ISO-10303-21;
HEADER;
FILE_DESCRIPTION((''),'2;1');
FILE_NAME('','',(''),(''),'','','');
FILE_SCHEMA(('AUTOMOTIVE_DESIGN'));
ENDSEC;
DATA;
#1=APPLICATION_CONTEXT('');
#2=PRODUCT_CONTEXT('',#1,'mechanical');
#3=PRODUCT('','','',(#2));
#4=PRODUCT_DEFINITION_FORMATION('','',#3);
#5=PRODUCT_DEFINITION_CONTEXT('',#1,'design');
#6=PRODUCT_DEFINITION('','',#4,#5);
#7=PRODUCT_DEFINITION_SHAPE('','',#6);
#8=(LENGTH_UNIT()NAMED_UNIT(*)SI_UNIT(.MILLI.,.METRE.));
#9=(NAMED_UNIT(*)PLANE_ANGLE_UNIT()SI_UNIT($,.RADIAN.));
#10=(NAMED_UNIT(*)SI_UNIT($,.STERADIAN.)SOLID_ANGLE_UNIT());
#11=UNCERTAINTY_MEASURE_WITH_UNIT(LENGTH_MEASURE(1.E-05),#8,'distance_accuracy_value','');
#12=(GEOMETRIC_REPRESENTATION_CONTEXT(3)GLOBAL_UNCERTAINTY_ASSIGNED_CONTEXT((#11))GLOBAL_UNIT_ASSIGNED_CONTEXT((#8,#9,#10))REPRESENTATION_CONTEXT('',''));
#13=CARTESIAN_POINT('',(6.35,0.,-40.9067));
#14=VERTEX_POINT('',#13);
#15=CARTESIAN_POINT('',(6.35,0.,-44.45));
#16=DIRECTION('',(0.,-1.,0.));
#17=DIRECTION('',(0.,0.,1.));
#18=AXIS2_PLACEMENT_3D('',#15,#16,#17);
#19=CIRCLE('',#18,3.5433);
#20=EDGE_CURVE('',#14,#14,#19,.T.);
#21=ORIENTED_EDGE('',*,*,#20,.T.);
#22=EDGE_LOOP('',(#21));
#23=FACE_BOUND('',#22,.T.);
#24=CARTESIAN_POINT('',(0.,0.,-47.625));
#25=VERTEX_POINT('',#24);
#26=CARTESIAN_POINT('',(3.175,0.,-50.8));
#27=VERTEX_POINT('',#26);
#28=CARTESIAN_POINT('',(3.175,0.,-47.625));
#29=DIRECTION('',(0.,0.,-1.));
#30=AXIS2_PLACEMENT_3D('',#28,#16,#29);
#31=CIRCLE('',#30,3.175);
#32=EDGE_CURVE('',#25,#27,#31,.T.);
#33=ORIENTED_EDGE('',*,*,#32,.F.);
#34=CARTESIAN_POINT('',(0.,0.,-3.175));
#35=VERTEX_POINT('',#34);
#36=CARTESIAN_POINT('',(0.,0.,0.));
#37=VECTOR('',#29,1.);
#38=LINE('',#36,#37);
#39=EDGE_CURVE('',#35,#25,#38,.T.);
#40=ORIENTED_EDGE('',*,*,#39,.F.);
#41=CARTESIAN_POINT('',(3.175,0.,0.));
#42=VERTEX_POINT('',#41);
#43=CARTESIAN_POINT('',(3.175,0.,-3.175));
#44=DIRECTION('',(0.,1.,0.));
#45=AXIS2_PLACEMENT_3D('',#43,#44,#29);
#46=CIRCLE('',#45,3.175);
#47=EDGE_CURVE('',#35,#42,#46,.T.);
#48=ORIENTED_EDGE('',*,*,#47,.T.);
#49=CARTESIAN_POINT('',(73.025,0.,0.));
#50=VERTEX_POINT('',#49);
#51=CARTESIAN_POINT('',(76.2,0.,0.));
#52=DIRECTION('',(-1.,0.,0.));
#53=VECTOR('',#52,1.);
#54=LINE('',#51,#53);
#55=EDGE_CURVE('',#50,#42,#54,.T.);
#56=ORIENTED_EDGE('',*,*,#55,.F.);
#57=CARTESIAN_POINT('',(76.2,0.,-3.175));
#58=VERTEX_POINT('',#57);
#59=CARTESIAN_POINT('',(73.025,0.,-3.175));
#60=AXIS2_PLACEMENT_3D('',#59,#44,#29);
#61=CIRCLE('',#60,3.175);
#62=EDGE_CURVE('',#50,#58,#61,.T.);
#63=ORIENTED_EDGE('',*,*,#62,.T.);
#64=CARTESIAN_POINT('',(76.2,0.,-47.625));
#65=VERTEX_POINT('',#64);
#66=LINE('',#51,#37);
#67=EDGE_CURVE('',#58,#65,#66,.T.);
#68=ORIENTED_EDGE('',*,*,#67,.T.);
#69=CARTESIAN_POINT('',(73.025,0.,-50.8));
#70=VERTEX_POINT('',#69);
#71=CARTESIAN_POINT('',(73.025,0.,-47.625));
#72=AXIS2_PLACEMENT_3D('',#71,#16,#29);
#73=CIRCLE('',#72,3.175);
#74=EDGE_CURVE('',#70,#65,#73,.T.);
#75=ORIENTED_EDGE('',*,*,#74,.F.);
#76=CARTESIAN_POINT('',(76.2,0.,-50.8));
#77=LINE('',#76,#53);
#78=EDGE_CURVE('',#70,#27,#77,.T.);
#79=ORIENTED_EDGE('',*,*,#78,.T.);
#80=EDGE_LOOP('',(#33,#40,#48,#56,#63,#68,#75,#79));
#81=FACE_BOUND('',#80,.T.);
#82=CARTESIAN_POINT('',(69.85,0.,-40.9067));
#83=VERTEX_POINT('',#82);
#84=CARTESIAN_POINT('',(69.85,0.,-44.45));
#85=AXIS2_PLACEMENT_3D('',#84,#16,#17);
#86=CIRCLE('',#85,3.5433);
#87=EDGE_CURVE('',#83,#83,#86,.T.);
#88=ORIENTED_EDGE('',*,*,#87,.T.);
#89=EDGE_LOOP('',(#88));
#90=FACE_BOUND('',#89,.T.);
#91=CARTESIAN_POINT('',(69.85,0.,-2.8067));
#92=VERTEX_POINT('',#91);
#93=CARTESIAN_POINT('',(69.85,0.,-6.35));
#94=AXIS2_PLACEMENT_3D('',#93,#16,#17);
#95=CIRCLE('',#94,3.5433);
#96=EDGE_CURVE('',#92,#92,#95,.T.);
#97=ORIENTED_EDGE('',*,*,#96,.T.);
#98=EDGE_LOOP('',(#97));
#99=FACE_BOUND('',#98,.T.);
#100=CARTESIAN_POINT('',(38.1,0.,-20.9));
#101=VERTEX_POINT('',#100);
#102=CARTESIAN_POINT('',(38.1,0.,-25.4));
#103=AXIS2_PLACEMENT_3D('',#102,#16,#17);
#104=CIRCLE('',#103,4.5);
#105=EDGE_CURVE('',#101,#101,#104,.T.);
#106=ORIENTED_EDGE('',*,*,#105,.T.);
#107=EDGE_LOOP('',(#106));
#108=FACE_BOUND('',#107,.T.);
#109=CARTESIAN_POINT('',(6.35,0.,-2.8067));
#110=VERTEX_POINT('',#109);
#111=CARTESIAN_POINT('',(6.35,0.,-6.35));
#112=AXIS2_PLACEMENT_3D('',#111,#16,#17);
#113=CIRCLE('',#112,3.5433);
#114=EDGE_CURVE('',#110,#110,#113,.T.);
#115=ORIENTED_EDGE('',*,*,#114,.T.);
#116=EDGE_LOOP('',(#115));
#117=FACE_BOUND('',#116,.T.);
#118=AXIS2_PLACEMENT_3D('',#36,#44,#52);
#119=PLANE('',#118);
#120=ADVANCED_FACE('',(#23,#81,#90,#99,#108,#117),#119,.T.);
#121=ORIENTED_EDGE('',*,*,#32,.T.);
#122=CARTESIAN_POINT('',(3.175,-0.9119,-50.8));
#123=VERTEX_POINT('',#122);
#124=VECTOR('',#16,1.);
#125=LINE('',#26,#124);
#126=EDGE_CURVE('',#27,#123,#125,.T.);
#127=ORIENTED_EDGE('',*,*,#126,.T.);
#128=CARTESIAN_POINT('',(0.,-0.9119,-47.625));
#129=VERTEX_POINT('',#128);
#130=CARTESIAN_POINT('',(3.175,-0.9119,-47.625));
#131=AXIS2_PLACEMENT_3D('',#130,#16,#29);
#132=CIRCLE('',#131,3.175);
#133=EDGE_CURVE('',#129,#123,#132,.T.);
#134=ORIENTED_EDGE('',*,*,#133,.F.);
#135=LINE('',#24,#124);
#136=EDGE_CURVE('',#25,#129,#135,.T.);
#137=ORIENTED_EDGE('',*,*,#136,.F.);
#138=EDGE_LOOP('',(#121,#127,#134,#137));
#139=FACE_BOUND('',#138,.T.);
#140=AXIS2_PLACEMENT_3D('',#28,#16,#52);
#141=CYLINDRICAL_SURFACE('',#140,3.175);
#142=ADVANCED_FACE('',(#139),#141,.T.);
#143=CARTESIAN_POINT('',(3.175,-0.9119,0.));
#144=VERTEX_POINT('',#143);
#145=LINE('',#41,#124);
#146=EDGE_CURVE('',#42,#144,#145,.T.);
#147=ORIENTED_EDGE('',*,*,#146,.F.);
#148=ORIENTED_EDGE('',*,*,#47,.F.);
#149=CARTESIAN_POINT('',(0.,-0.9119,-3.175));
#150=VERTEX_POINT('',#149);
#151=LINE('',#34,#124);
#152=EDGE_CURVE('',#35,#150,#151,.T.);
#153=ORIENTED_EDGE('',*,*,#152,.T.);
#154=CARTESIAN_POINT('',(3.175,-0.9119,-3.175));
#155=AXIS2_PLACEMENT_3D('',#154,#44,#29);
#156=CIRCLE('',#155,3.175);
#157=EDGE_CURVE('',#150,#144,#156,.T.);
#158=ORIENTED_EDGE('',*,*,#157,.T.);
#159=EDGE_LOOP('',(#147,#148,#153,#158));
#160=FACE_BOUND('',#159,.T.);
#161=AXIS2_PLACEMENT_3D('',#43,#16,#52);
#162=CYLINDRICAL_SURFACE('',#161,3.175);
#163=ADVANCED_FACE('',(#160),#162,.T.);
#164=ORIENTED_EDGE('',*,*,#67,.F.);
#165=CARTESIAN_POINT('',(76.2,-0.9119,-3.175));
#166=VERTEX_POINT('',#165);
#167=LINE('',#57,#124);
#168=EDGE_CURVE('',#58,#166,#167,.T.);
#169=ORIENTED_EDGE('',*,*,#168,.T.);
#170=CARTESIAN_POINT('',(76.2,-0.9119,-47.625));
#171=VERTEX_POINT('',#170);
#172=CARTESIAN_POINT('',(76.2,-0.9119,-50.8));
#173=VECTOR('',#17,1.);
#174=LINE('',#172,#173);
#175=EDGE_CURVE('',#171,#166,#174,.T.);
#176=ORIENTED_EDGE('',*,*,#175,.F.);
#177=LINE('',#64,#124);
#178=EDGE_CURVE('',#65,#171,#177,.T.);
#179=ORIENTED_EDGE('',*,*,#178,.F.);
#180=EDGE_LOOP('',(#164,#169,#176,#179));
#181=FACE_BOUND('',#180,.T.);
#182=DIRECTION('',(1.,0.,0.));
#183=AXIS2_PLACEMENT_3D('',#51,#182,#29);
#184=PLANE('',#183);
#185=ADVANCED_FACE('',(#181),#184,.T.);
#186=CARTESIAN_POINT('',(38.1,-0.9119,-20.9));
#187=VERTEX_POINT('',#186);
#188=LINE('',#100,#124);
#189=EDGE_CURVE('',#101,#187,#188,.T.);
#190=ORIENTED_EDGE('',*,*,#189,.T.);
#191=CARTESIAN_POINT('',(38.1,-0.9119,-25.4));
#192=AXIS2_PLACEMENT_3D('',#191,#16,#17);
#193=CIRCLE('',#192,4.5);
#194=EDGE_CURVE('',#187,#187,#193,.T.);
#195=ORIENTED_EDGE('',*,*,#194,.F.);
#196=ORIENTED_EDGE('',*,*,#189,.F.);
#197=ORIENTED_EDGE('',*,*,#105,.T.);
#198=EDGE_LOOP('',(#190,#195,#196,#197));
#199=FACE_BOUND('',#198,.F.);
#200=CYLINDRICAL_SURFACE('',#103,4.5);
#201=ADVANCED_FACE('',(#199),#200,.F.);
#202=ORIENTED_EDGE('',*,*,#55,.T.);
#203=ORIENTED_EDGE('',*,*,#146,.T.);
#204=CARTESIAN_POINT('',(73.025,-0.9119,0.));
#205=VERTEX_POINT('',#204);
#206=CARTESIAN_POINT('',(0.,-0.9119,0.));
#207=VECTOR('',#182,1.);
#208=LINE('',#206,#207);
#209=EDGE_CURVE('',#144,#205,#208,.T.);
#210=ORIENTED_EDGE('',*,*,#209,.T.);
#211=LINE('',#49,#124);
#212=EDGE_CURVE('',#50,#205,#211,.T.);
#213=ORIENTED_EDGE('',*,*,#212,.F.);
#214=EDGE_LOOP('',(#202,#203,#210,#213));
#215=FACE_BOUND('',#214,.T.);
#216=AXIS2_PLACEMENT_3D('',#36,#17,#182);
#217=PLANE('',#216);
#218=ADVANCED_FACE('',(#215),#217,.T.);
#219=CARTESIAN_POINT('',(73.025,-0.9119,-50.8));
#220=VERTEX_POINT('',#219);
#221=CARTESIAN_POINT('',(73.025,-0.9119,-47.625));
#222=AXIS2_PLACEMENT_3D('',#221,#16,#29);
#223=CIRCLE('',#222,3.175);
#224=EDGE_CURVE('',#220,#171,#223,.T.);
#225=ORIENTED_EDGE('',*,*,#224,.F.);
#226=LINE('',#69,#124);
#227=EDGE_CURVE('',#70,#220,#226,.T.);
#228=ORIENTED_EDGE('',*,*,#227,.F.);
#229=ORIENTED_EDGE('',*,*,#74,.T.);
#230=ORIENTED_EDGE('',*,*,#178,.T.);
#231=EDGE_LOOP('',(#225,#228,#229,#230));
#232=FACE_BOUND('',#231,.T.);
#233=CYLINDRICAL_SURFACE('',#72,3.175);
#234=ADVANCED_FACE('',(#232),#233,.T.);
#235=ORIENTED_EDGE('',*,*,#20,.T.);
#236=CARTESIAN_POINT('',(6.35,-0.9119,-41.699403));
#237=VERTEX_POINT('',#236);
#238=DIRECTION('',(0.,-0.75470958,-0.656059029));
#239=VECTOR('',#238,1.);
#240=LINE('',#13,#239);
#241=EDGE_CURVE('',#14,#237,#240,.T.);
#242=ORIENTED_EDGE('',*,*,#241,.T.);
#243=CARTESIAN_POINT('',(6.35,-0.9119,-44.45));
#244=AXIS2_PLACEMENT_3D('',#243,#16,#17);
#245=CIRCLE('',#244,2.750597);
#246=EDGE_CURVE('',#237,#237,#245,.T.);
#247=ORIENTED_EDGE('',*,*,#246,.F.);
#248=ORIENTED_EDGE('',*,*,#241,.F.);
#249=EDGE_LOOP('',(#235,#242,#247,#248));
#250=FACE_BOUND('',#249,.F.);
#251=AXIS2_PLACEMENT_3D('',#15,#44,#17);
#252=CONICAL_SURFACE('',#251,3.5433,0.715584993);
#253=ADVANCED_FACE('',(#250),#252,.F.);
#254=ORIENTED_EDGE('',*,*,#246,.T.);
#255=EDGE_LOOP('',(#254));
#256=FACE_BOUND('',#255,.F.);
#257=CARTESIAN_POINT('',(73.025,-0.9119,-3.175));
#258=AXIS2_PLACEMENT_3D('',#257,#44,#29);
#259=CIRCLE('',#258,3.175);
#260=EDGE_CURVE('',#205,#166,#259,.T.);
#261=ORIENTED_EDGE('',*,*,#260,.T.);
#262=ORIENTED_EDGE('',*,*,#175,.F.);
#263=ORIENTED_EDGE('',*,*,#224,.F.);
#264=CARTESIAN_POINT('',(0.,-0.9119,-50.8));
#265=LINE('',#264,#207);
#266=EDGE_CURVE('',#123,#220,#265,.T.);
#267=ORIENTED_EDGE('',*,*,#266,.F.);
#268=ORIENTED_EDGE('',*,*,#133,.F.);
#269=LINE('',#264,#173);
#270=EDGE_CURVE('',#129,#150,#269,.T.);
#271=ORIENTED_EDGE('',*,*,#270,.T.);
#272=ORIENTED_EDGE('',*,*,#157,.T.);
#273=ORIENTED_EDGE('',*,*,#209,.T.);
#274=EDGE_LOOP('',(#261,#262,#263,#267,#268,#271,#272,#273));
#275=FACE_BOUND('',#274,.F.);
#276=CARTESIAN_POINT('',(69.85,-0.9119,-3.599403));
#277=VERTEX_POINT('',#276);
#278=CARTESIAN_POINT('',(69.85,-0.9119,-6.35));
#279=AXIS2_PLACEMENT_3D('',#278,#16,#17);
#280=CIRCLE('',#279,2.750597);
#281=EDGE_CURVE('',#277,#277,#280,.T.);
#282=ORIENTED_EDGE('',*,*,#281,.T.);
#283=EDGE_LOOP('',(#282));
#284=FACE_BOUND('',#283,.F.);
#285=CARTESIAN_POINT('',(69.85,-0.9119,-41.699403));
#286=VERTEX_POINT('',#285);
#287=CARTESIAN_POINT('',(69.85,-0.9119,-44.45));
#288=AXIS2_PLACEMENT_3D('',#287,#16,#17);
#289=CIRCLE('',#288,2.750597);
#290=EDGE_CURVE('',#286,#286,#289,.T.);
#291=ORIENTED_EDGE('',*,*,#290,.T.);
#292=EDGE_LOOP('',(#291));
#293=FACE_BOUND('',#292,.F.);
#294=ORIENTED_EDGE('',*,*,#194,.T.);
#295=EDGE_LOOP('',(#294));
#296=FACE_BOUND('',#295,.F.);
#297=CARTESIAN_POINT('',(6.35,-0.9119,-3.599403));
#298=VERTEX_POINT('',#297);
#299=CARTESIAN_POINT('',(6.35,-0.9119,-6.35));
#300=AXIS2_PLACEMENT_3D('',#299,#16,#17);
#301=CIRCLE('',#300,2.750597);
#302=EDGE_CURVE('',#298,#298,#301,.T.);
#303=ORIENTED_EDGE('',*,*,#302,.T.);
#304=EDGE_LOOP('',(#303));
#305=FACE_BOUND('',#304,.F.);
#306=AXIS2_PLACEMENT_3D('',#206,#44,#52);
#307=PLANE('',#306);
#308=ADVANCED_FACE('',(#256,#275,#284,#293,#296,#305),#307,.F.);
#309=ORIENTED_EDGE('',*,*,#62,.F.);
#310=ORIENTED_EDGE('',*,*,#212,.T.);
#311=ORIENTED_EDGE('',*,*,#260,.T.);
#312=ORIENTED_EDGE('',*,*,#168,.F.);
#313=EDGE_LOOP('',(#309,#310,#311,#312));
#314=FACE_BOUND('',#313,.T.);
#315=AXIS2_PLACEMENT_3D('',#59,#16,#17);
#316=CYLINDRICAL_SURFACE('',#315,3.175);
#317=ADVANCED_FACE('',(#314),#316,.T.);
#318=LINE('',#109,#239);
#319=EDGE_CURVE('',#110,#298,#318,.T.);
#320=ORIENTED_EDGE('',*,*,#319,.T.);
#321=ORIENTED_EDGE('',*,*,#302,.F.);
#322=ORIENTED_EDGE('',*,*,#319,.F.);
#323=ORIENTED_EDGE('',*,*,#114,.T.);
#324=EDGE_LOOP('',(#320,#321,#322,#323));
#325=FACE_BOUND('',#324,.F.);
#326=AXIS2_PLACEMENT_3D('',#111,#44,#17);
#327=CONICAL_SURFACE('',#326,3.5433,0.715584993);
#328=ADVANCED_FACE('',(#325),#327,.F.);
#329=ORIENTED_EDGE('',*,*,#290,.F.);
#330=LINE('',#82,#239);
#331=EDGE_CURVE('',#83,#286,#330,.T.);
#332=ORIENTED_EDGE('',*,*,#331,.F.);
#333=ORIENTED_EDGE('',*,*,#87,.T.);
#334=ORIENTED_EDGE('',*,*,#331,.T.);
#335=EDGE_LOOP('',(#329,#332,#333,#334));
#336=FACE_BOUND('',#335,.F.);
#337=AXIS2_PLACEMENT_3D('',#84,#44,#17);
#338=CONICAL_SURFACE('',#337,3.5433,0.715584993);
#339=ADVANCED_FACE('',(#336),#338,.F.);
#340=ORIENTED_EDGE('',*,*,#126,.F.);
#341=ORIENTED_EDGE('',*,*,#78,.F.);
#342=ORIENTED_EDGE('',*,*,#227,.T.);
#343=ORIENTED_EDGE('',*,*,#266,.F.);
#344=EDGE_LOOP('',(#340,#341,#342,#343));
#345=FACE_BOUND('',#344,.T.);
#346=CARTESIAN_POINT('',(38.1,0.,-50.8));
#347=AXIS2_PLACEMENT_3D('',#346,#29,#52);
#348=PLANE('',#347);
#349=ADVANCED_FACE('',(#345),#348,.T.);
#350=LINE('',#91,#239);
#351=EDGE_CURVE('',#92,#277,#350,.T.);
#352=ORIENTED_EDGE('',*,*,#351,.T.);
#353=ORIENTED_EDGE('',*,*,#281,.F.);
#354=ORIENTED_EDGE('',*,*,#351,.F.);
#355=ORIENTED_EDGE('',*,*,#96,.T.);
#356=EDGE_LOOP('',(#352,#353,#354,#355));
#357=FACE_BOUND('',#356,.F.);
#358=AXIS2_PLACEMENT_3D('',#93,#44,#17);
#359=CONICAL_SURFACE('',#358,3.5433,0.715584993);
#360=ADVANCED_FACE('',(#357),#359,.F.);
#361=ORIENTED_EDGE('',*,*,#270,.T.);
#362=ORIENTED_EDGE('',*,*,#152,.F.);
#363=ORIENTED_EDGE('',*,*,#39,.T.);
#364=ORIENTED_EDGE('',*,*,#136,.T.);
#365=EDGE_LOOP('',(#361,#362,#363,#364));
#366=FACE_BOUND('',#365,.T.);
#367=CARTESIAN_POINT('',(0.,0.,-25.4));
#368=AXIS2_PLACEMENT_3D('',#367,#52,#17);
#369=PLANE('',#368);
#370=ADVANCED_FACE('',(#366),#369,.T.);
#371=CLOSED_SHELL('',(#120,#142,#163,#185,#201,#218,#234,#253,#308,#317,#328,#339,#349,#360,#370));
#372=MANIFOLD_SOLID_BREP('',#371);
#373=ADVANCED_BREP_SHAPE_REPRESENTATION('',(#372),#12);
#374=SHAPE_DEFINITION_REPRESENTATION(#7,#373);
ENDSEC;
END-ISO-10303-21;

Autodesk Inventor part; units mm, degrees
ref_plane "YZ Plane" through (0, 0, 0) normal (1, 0, 0) x (0, 1, 0)
ref_plane "XZ Plane" through (0, 0, 0) normal (0, 1, 0) x (-1, 0, 0)
ref_plane "XY Plane" through (0, 0, 0) normal (0, 0, 1) x (1, 0, 0)
sketch "Sketch1" plane through (0, 0, 0) normal (0, 1, 0) x (-1, 0, 0)
  line L0 (0, 0) -> (-76.2, 0)
  line L1 (-76.2, 0) -> (-76.2, -50.8)
  line L2 (-76.2, -50.8) -> (0, -50.8)
  line L3 (0, -50.8) -> (0, 0)
  line L4 (0, -25.4) -> (-76.2, -25.4)
  line L5 (-38.1, -50.8) -> (-38.1, 0)
  line L6 (-6.35, -44.45) -> (-69.85, -44.45) construction
  line L7 (-69.85, -44.45) -> (-69.85, -6.35) construction
  line L8 (-69.85, -6.35) -> (-6.35, -6.35) construction
  line L9 (-6.35, -6.35) -> (-6.35, -44.45) construction
  line L10 (-6.35, -44.45) -> (-69.85, -6.35) construction
  line L11 (-69.85, -44.45) -> (-6.35, -6.35) construction
  circle A0 centre (-6.35, -44.45) radius 1.5875
  circle A1 centre (-69.85, -44.45) radius 1.5875
  circle A2 centre (-6.35, -6.35) radius 1.5875
  circle A3 centre (-69.85, -6.35) radius 1.5875
  circle A4 centre (-38.1, -25.4) radius 4.5
  dimension "d0" = 76.2
  dimension "d1" = 50.8
  dimension "d2" = 63.5
  dimension "d3" = 38.1
  dimension "d4" = 3.175
  dimension "d13" = 9
extrude "Plate1" add sketch "Sketch1" against normal blind 0.9119 contours L3 L4 A4 L5 L0 | L5 A4 L4 L1 L0 | L3 L2 L5 A4 L4 | A4 L4 L5 | L5 L4 A4 | A4 L5 L4 | L4 A4 L5 L2 L1 | L5 A4 L4 | A0 | A1 | A2 | A3
hole "Mounting Holes" at (6.35, 0, -44.45) at (69.85, 0, -44.45) at (69.85, 0, -6.35) at (6.35, 0, -6.35) direction (0, -1, 0) diameter 3.81 end through all countersink diameter 7.0866 countersink angle 82 clearance for "Flat Head Machine Screw (82)" size "#6" standard "Ansi Unified Screw Threads"
hole "Input Jack Hole" at (38.1, 0, -25.4) direction (0, -1, 0) diameter 9 end through all
fillet "Corner Round1" radius 3.175 4 edges at (0, -0.4559, -50.8) (76.2, -0.4559, -50.8) (76.2, -0.4559, 0) (0, -0.4559, 0)
equation "\"d11\" = Thickness"
equation "\"d5\" = Thickness"
equation "\"BendRadius\" = Thickness"
equation "\"BendReliefWidth\" = Thickness"
equation "\"BendReliefDepth\" = 0.5 * Thickness"
equation "\"CornerReliefSize\" = 4 * Thickness"
equation "\"MinimumRemnant\" = 2 * Thickness"
equation "\"TransitionRadius\" = BendRadius"
equation "\"JacobiRadiusSize\" = BendRadius"
equation "\"GapSize\" = Thickness"
equation "\"Thickness\" = 0.91186"
properties part number "Jack Plate" material "Steel, Carbon"
